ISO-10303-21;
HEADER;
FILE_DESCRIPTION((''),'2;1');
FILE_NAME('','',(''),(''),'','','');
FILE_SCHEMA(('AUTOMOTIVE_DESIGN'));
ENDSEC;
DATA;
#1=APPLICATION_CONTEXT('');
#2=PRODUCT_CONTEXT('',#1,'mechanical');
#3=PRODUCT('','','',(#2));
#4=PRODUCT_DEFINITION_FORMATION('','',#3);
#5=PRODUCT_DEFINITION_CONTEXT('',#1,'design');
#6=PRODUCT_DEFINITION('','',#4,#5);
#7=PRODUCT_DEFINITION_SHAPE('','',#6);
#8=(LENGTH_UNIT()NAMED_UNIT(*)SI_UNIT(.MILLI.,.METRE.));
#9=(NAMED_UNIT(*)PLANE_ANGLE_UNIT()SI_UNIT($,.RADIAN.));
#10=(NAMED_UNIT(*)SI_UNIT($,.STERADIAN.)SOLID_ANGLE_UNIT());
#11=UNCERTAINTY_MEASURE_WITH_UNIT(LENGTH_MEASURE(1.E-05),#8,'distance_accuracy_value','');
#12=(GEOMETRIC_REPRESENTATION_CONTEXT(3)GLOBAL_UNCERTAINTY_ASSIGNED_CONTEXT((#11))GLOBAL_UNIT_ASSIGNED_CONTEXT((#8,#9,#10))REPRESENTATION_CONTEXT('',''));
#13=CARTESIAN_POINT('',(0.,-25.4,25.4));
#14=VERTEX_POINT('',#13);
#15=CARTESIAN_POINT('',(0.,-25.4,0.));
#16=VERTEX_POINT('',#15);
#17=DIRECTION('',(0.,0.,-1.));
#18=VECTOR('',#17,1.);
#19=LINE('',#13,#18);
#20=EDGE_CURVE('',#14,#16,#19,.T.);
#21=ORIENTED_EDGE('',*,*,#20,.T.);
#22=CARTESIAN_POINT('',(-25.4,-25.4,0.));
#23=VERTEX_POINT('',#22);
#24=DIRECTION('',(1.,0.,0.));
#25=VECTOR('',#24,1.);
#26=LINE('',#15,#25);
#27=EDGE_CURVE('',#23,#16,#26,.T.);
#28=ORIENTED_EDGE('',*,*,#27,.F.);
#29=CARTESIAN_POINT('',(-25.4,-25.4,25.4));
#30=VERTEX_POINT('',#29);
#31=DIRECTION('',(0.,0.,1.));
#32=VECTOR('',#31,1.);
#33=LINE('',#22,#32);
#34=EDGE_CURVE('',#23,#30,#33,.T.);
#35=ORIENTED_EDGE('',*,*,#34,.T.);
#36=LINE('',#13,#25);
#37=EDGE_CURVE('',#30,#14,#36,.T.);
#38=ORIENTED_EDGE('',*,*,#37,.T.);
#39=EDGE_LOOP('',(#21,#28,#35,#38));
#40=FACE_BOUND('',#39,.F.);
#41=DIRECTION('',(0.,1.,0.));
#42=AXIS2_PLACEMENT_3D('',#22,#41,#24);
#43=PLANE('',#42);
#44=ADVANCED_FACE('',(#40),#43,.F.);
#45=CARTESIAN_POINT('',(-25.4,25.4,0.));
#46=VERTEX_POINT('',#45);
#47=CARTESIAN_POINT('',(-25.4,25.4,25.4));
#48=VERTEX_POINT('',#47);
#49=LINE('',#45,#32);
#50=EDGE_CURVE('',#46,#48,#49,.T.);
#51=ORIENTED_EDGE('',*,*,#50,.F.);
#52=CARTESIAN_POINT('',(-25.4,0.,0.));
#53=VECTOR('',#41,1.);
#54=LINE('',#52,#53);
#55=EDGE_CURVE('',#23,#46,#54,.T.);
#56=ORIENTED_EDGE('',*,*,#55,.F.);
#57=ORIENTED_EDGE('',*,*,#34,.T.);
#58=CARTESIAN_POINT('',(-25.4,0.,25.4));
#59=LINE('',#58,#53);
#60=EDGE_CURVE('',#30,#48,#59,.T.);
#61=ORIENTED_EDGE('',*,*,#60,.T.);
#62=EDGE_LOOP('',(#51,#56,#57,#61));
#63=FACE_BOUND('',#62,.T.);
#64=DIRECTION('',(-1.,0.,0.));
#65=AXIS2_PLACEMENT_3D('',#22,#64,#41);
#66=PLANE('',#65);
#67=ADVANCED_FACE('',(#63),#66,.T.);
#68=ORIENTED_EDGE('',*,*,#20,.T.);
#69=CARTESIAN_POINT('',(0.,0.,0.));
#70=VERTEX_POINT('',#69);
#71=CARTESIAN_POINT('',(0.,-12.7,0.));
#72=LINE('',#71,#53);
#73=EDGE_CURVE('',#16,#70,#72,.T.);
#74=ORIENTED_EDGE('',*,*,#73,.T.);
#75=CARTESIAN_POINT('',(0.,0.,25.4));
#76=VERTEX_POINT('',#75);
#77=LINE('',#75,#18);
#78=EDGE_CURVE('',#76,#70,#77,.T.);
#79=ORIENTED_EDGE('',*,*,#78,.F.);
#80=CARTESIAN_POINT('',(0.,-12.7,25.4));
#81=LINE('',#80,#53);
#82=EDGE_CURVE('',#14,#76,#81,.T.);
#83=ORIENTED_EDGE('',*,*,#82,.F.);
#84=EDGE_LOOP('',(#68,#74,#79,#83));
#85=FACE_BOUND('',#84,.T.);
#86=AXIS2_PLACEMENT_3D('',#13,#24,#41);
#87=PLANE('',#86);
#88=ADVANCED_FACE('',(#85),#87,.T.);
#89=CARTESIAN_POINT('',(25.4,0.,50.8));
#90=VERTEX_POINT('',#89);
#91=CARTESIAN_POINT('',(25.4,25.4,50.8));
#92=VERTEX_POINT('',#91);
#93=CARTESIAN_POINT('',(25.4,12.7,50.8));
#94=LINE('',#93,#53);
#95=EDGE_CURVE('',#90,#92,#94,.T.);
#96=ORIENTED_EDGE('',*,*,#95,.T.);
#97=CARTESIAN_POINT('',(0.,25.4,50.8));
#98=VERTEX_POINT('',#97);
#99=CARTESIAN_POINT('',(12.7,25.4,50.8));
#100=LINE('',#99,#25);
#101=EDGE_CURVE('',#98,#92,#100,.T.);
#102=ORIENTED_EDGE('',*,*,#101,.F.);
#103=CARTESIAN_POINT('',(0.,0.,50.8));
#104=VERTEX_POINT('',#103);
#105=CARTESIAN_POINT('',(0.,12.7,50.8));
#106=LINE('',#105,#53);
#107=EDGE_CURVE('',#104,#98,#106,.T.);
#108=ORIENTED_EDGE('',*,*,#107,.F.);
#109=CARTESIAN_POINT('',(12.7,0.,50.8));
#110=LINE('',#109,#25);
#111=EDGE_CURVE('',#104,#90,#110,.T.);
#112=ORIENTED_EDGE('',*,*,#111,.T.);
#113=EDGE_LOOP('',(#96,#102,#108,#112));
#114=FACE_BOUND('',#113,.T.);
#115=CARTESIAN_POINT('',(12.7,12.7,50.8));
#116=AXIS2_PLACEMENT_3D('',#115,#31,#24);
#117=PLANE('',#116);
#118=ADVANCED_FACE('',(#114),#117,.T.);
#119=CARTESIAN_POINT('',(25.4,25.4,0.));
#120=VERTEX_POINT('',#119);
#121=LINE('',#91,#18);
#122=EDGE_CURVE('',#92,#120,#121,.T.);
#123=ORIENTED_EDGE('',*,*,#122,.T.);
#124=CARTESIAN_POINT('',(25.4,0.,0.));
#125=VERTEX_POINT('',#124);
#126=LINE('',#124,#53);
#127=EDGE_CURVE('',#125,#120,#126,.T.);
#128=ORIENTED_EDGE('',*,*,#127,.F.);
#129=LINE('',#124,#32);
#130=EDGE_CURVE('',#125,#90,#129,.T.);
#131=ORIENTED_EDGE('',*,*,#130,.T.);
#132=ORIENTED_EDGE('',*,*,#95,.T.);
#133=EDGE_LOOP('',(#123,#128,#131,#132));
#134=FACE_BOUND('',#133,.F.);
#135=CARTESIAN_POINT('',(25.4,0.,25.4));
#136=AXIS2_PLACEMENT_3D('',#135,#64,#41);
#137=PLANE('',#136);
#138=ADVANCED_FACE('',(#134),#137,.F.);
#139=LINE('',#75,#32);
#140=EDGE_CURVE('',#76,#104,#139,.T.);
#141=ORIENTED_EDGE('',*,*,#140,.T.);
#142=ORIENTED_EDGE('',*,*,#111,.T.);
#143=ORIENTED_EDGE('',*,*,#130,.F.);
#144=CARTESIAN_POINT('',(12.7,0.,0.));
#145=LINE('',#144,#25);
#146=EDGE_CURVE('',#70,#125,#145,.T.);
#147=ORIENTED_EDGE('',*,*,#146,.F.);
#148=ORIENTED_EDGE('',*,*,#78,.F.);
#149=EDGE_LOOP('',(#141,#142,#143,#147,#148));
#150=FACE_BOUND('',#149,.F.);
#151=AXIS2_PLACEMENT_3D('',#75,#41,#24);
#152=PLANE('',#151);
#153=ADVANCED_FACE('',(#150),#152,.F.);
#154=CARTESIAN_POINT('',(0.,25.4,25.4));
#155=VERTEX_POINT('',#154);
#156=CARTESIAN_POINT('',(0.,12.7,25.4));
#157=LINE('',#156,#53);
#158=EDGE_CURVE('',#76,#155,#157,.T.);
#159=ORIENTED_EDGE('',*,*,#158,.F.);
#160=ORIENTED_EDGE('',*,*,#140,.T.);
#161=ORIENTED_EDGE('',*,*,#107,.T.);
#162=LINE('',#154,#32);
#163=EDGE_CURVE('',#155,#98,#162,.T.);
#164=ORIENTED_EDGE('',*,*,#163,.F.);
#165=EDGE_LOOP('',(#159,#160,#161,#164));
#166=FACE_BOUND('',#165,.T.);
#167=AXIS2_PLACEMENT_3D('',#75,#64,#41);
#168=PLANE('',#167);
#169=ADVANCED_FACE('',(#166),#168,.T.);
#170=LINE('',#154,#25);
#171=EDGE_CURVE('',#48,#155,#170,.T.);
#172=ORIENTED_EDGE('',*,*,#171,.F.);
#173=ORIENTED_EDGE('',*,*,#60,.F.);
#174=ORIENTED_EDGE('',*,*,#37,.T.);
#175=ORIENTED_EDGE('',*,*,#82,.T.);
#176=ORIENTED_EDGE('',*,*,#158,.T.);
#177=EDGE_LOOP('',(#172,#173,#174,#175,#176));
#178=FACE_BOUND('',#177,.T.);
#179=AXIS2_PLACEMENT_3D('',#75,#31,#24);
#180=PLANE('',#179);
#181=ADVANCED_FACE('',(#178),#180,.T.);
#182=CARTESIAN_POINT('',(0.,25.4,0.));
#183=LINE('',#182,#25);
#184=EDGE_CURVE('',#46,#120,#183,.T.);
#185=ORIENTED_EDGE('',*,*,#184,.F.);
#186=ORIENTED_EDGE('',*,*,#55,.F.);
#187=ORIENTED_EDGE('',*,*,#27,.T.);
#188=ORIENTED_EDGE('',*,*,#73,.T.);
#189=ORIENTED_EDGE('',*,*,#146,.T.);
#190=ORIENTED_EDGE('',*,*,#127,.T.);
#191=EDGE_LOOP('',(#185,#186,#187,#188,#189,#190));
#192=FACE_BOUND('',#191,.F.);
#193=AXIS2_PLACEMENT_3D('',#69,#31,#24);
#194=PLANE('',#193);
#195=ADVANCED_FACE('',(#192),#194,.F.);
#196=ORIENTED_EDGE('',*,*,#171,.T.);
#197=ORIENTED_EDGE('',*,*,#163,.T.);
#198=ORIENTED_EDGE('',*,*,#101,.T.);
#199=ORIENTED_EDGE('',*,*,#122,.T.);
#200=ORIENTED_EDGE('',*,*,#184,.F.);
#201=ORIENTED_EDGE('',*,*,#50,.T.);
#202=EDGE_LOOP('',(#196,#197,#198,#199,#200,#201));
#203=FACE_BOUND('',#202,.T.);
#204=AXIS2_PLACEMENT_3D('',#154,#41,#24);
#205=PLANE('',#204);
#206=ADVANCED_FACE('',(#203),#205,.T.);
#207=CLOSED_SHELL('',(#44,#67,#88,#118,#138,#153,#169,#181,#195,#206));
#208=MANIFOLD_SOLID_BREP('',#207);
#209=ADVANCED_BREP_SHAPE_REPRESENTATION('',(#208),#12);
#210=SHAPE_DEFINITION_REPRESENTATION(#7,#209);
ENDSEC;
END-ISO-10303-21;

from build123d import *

# Parameters (mm, degrees)
F1_W     = 50.8
F1_H     = 50.8
F2_DEPTH = 25.4
F3_W     = 25.4
F3_H     = 25.4
F4_DEPTH = 25.4
F5_W     = 25.4
F5_H     = 25.4
F6_DEPTH = 25.4


# Not quite as in the source:
# - a variable given as a bare number and used for a length is read in inches; the dataset says mm whatever the document's units were


with BuildPart() as f2:
    # F1 (on Top) → F2 (new body)
    with BuildSketch(Plane.XY):
        Rectangle(F1_W, F1_H)
    extrude(amount=F2_DEPTH)

    # F3 (on face) → F4 (cut)
    with BuildSketch(Plane.XY.offset(25.4)):
        with Locations((12.7, -12.7)):
            Rectangle(F3_W, F3_H)
    extrude(amount=-F4_DEPTH, mode=Mode.SUBTRACT)

    # F5 (on face) → F6 (join)
    with BuildSketch(Plane.XY.offset(25.4)):
        with Locations((12.7, 12.7)):
            Rectangle(F5_W, F5_H)
    extrude(amount=F6_DEPTH)


solid = f2.part
